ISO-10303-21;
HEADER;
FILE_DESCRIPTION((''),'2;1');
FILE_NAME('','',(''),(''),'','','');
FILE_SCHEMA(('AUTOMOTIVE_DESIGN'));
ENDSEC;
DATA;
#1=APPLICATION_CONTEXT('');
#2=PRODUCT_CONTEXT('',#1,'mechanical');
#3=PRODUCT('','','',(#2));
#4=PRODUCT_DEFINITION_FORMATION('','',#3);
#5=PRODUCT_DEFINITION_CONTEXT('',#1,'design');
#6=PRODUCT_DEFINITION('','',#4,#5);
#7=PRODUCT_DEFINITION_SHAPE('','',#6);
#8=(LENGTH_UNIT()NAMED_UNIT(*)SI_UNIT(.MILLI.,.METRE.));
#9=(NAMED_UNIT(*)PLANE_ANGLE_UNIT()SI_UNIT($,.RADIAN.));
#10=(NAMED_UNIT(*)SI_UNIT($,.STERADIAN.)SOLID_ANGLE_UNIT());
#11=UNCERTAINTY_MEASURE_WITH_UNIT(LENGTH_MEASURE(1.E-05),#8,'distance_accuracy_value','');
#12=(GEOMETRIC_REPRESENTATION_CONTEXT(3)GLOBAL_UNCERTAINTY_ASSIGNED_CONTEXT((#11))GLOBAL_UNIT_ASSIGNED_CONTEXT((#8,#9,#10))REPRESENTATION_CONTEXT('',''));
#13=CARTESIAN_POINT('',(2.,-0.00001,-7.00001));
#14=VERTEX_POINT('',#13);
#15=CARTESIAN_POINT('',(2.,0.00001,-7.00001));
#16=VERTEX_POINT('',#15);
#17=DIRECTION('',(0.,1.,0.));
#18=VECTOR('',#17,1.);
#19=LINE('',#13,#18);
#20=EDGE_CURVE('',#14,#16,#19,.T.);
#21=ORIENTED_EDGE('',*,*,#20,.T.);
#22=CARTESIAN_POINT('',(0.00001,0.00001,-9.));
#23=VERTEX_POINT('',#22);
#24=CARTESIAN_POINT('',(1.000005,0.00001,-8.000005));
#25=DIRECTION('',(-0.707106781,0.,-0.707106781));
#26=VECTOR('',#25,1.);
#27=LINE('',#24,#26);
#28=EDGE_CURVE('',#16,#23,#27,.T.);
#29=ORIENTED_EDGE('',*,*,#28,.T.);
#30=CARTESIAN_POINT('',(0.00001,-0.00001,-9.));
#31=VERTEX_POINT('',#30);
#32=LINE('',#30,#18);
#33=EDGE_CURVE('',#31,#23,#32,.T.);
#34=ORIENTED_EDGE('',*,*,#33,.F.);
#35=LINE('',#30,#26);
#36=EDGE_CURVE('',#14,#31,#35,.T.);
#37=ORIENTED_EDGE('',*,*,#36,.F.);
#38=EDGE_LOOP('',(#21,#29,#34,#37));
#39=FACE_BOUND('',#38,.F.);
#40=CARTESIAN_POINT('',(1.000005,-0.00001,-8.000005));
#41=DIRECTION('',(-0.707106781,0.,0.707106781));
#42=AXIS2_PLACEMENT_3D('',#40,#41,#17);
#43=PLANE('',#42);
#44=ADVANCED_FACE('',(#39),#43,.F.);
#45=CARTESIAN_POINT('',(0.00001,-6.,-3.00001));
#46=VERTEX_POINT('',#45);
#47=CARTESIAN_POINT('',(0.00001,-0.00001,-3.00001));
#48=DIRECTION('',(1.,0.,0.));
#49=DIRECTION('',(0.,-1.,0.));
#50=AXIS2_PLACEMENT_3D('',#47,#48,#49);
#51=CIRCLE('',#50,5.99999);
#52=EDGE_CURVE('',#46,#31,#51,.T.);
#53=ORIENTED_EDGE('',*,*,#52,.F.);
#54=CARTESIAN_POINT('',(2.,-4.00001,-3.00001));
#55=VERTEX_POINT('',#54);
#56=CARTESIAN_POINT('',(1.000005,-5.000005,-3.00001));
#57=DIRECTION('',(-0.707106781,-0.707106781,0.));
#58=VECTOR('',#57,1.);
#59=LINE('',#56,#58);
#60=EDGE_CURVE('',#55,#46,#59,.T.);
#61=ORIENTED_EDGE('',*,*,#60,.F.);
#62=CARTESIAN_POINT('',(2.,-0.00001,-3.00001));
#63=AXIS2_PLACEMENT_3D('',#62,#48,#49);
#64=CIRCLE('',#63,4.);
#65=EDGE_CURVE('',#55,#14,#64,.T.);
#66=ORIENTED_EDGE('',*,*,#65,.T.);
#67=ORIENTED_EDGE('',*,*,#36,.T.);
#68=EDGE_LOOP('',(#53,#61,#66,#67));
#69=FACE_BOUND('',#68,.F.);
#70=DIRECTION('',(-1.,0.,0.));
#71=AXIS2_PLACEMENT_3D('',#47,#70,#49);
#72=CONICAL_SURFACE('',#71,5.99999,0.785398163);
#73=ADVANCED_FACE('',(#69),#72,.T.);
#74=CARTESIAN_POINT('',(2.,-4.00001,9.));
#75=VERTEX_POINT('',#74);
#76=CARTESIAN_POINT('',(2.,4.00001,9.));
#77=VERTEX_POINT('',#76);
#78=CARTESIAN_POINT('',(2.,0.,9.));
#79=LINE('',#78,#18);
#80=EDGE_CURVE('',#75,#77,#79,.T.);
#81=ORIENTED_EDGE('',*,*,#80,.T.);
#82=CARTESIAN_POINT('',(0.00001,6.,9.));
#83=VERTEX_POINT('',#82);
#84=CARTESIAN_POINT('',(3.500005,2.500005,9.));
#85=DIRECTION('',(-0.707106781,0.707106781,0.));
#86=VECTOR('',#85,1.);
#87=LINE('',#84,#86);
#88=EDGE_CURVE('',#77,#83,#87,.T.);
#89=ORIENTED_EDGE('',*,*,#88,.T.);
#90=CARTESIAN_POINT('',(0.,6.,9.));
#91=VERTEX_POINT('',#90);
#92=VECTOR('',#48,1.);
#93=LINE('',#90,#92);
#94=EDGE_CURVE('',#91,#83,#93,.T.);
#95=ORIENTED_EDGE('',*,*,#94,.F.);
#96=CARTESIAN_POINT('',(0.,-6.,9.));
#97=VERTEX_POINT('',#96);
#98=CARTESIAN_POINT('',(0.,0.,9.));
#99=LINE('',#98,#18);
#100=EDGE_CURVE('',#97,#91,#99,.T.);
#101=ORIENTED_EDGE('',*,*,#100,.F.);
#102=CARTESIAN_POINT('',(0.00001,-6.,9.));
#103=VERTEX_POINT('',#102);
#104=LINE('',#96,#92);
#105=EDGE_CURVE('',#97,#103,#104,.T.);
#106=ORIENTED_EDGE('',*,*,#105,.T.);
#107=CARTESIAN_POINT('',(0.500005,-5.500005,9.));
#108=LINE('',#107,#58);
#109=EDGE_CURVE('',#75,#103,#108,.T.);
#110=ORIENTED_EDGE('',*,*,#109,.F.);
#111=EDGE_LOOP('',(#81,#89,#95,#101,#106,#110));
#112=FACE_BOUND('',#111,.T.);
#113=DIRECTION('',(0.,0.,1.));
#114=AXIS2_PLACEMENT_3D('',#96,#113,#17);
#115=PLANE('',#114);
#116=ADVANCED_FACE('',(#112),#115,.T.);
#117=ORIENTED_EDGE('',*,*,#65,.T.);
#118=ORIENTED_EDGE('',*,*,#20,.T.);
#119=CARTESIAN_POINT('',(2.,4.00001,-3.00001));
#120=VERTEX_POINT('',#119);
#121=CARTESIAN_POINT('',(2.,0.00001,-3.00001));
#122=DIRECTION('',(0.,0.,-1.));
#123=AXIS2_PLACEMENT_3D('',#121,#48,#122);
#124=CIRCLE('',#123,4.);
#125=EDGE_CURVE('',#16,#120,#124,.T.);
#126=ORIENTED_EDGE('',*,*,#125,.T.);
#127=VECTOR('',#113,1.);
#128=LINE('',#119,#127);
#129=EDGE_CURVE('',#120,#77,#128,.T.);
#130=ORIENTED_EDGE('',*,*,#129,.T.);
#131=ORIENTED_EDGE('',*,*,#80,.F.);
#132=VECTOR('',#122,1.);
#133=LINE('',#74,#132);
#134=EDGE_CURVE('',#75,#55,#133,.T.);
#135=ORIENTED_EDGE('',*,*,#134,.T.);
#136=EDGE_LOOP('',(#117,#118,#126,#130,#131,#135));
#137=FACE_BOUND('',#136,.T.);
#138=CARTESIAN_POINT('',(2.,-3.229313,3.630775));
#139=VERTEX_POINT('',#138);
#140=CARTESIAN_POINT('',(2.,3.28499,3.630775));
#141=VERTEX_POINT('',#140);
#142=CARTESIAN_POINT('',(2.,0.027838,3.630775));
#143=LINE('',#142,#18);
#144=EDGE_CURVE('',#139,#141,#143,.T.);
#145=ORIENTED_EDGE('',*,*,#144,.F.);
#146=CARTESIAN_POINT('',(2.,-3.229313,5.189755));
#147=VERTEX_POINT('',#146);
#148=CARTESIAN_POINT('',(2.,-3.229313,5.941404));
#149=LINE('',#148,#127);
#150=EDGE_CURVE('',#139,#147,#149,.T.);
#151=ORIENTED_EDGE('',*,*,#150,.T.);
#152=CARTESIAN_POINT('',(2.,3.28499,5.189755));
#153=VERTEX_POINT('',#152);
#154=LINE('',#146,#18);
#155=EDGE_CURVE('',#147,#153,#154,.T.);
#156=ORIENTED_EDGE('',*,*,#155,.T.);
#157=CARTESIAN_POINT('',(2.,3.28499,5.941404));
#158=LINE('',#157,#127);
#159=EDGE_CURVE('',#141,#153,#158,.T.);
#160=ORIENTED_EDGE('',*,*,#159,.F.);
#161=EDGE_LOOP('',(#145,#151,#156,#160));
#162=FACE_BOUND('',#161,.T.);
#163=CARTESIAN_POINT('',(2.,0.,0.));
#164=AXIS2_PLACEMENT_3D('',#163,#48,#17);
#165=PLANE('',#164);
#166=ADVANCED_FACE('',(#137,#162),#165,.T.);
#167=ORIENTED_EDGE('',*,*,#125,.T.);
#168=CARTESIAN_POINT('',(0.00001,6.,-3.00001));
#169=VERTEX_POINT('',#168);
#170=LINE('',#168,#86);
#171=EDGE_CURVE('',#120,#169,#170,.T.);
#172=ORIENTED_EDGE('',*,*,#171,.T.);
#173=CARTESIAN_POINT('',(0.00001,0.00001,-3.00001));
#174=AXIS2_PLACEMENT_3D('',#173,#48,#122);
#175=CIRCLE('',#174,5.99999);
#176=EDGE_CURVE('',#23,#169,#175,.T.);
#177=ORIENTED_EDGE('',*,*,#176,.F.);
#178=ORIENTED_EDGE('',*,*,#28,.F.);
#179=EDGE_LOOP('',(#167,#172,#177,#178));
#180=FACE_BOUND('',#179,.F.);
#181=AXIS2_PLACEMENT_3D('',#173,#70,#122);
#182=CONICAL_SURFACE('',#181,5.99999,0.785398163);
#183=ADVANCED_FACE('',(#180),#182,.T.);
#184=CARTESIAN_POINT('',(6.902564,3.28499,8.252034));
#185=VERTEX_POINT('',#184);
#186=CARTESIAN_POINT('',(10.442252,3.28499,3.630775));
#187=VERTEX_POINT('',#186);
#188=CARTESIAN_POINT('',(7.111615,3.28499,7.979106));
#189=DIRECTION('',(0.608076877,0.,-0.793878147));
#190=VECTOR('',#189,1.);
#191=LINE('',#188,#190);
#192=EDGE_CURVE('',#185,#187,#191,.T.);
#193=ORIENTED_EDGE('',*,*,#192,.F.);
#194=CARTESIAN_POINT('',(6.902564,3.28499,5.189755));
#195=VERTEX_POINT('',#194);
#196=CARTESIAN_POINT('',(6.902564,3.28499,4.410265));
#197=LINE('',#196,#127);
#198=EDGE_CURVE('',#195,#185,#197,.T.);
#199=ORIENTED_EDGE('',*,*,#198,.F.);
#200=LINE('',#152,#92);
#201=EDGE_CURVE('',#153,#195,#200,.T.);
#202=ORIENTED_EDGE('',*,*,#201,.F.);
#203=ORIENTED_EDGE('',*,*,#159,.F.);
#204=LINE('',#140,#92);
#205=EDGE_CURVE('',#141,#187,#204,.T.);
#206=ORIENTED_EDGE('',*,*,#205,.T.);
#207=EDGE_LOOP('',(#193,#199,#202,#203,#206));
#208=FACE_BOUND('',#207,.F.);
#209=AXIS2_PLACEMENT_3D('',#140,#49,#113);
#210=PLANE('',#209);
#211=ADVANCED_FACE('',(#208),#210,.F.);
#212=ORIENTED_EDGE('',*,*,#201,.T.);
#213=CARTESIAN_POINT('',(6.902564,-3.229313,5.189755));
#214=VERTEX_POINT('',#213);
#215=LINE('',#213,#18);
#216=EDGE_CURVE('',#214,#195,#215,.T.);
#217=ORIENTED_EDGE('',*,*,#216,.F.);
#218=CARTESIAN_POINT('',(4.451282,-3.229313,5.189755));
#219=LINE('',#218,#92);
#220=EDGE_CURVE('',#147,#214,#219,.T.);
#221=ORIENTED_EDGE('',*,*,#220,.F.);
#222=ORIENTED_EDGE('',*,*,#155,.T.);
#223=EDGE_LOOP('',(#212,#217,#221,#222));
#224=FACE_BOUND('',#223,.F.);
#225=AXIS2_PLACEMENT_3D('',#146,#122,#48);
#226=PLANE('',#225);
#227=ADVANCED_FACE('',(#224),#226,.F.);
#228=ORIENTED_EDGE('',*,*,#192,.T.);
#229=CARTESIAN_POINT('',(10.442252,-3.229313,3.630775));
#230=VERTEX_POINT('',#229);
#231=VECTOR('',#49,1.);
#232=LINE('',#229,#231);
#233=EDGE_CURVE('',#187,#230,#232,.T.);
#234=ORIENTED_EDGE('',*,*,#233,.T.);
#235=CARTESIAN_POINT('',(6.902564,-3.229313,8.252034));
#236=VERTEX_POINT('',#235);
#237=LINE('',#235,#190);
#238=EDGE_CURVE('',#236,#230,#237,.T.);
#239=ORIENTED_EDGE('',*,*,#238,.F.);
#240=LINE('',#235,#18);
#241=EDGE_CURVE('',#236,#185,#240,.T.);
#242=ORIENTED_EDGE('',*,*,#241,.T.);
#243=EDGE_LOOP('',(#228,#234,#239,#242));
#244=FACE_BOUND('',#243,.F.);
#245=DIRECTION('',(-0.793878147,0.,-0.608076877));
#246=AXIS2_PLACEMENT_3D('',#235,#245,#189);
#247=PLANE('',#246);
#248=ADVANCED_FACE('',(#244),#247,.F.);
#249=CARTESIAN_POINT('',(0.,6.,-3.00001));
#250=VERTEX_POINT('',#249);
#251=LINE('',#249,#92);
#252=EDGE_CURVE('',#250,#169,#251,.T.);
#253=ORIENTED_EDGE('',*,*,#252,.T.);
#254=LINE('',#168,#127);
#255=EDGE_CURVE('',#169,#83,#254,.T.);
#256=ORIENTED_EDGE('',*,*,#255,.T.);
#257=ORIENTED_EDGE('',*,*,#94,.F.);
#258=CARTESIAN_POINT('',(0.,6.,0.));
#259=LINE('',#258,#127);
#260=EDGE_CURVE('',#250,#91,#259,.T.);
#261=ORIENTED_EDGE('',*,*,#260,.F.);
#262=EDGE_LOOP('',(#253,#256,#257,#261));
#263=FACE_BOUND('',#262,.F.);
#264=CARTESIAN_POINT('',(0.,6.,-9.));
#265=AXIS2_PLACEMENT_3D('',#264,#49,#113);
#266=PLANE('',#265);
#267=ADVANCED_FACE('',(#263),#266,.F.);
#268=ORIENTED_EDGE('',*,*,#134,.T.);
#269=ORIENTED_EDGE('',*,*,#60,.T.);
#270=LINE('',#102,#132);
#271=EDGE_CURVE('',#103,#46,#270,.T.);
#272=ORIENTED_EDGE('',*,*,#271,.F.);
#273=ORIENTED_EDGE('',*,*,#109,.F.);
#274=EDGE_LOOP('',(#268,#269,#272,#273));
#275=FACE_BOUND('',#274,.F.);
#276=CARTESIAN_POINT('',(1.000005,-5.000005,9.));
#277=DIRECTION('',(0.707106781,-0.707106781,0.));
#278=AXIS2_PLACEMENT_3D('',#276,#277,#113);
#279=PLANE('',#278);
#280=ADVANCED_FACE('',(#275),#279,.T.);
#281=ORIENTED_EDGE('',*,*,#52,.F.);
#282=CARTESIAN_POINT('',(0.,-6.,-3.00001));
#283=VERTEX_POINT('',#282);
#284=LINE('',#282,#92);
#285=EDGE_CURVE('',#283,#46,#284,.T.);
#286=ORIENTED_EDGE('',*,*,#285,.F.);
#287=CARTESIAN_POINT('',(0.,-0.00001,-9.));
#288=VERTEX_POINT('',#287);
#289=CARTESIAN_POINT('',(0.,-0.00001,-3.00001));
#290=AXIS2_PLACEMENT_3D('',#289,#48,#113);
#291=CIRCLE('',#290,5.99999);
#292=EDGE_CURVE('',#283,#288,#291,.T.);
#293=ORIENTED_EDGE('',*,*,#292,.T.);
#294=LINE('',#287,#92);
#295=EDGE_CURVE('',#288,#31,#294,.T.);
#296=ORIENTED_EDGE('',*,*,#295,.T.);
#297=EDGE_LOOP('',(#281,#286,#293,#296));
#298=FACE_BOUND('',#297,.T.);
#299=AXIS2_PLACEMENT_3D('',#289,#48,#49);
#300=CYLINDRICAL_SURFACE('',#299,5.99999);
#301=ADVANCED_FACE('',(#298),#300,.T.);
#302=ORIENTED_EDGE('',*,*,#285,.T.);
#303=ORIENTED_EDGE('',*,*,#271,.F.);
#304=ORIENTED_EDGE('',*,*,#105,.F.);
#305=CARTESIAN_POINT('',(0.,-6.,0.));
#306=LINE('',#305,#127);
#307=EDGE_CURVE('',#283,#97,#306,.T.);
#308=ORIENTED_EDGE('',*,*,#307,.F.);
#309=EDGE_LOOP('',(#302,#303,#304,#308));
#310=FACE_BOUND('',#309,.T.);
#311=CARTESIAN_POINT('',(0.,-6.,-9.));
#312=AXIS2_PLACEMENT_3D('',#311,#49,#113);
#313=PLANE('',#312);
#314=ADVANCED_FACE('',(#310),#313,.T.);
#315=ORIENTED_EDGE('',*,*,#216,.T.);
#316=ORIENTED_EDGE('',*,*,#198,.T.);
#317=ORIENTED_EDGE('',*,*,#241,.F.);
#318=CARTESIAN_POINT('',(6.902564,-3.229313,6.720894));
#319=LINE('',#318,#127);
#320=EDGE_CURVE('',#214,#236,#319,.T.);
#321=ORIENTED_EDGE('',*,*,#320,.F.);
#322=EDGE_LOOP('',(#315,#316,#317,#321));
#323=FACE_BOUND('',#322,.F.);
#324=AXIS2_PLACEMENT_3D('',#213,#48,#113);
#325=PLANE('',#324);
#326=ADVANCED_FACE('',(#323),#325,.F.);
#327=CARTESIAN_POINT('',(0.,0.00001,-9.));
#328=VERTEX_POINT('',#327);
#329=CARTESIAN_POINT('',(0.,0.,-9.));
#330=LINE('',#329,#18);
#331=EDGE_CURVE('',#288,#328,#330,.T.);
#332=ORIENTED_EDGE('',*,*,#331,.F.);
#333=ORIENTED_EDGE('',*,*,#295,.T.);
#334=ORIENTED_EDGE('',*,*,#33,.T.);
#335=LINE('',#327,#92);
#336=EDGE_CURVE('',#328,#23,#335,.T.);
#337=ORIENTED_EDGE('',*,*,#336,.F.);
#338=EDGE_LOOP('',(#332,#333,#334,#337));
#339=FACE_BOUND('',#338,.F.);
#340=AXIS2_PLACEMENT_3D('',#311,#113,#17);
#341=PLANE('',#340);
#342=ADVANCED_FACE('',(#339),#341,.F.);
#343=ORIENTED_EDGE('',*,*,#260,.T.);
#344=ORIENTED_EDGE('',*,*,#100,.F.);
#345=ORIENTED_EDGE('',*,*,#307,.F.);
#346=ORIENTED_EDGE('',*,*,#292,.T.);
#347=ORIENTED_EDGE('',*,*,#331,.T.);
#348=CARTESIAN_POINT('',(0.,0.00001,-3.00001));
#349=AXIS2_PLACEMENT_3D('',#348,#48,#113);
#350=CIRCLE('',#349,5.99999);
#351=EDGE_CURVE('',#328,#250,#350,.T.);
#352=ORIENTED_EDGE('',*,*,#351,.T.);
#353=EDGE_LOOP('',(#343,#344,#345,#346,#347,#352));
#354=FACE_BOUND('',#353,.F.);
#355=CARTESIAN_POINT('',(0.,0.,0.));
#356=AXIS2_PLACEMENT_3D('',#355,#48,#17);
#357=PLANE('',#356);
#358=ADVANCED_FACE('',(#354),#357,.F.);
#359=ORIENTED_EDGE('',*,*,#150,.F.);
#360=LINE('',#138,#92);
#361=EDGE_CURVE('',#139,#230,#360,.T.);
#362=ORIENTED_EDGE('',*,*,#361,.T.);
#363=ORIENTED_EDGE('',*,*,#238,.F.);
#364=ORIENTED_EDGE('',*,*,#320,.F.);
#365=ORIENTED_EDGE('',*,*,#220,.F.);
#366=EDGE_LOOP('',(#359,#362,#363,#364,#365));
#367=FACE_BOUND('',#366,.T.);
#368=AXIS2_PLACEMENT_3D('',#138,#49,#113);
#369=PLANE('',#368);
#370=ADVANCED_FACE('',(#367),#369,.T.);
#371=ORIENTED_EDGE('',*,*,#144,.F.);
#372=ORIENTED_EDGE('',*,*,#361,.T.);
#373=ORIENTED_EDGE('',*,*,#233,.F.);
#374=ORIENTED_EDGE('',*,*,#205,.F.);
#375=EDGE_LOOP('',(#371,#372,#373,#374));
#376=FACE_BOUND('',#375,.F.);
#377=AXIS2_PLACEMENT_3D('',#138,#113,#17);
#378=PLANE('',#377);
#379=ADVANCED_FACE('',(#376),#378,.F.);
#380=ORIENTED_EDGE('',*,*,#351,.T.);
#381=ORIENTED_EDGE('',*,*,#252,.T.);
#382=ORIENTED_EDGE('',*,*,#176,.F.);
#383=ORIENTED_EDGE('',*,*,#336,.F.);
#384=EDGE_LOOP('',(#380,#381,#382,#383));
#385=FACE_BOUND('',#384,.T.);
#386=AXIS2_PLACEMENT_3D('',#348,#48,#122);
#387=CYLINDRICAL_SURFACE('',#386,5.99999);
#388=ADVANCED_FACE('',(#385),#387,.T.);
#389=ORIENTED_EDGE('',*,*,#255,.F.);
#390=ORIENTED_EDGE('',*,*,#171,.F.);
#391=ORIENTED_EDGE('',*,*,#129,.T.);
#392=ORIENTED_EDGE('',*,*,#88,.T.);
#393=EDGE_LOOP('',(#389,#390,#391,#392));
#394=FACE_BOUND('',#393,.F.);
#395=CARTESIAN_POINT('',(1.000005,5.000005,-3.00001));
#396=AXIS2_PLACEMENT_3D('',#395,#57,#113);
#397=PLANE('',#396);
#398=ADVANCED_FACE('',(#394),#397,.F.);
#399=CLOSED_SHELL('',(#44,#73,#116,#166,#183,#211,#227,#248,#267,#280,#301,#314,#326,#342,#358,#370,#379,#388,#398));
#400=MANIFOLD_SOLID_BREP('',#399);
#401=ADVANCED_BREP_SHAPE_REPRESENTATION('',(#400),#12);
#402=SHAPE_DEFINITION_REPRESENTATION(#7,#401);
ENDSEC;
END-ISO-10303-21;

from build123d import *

# Parameters (mm, degrees)
F0_W     = 12
F0_H     = 18
F1_DEPTH = 2
F3_R     = 5.99999
F4_SIZE  = 1.99999
F5_W     = 6.5143028369
F5_H     = 4.6212589368
F6_DEPTH = 10
F7_W     = 4.9025638513
F7_H     = 3.0622794293
F8_DEPTH = 25


# Not quite as in the source:
# - a fillet or chamfer is up to 0.001 mm smaller than in the source, because OpenCascade refuses the exact size


with BuildPart() as f1:
    # F0 (on Right) → F1 (new body)
    with BuildSketch(Plane.YZ):
        Rectangle(F0_W, F0_H)
    extrude(amount=F1_DEPTH)

    # F3 (radius 6 in the source; OpenCascade refuses exactly that, so slightly less here)
    f3_edges = [f1.edges().sort_by_distance(p)[0] for p in [
        (1, 6, -9),
        (1, -6, -9),
    ]]
    fillet(f3_edges, radius=F3_R)

    # F4 (size 2 in the source; OpenCascade refuses exactly that, so slightly less here)
    f4_edges = [f1.edges().sort_by_distance(p)[0] for p in [
        (2, 4.242644, -7.242644),
        (2, -6, 2.999995),
    ]]
    chamfer(f4_edges, length=F4_SIZE)

    # F5 (on face) → F6 (join)
    with BuildSketch(Plane.YZ.offset(2)):
        with Locations((0.0278381212, 5.9414044954)):
            Rectangle(F5_W, F5_H)
    extrude(amount=F6_DEPTH)

    # F7 (on face) → F8 (cut)
    with BuildSketch(Plane.XZ.offset(3.2293132972)):
        Polygon((6.9025638513, 9.0315220878), (6.9025638513, 8.2520339638), (10.911365971, 3.0183200724), (13.6395776644, 3.0183200724), (12.8879277036, 9.0315220878), align=None)
        with Locations((4.4512819257, 6.7208942492)):
            Rectangle(F7_W, F7_H)
    extrude(amount=-F8_DEPTH, mode=Mode.SUBTRACT)


solid = f1.part
